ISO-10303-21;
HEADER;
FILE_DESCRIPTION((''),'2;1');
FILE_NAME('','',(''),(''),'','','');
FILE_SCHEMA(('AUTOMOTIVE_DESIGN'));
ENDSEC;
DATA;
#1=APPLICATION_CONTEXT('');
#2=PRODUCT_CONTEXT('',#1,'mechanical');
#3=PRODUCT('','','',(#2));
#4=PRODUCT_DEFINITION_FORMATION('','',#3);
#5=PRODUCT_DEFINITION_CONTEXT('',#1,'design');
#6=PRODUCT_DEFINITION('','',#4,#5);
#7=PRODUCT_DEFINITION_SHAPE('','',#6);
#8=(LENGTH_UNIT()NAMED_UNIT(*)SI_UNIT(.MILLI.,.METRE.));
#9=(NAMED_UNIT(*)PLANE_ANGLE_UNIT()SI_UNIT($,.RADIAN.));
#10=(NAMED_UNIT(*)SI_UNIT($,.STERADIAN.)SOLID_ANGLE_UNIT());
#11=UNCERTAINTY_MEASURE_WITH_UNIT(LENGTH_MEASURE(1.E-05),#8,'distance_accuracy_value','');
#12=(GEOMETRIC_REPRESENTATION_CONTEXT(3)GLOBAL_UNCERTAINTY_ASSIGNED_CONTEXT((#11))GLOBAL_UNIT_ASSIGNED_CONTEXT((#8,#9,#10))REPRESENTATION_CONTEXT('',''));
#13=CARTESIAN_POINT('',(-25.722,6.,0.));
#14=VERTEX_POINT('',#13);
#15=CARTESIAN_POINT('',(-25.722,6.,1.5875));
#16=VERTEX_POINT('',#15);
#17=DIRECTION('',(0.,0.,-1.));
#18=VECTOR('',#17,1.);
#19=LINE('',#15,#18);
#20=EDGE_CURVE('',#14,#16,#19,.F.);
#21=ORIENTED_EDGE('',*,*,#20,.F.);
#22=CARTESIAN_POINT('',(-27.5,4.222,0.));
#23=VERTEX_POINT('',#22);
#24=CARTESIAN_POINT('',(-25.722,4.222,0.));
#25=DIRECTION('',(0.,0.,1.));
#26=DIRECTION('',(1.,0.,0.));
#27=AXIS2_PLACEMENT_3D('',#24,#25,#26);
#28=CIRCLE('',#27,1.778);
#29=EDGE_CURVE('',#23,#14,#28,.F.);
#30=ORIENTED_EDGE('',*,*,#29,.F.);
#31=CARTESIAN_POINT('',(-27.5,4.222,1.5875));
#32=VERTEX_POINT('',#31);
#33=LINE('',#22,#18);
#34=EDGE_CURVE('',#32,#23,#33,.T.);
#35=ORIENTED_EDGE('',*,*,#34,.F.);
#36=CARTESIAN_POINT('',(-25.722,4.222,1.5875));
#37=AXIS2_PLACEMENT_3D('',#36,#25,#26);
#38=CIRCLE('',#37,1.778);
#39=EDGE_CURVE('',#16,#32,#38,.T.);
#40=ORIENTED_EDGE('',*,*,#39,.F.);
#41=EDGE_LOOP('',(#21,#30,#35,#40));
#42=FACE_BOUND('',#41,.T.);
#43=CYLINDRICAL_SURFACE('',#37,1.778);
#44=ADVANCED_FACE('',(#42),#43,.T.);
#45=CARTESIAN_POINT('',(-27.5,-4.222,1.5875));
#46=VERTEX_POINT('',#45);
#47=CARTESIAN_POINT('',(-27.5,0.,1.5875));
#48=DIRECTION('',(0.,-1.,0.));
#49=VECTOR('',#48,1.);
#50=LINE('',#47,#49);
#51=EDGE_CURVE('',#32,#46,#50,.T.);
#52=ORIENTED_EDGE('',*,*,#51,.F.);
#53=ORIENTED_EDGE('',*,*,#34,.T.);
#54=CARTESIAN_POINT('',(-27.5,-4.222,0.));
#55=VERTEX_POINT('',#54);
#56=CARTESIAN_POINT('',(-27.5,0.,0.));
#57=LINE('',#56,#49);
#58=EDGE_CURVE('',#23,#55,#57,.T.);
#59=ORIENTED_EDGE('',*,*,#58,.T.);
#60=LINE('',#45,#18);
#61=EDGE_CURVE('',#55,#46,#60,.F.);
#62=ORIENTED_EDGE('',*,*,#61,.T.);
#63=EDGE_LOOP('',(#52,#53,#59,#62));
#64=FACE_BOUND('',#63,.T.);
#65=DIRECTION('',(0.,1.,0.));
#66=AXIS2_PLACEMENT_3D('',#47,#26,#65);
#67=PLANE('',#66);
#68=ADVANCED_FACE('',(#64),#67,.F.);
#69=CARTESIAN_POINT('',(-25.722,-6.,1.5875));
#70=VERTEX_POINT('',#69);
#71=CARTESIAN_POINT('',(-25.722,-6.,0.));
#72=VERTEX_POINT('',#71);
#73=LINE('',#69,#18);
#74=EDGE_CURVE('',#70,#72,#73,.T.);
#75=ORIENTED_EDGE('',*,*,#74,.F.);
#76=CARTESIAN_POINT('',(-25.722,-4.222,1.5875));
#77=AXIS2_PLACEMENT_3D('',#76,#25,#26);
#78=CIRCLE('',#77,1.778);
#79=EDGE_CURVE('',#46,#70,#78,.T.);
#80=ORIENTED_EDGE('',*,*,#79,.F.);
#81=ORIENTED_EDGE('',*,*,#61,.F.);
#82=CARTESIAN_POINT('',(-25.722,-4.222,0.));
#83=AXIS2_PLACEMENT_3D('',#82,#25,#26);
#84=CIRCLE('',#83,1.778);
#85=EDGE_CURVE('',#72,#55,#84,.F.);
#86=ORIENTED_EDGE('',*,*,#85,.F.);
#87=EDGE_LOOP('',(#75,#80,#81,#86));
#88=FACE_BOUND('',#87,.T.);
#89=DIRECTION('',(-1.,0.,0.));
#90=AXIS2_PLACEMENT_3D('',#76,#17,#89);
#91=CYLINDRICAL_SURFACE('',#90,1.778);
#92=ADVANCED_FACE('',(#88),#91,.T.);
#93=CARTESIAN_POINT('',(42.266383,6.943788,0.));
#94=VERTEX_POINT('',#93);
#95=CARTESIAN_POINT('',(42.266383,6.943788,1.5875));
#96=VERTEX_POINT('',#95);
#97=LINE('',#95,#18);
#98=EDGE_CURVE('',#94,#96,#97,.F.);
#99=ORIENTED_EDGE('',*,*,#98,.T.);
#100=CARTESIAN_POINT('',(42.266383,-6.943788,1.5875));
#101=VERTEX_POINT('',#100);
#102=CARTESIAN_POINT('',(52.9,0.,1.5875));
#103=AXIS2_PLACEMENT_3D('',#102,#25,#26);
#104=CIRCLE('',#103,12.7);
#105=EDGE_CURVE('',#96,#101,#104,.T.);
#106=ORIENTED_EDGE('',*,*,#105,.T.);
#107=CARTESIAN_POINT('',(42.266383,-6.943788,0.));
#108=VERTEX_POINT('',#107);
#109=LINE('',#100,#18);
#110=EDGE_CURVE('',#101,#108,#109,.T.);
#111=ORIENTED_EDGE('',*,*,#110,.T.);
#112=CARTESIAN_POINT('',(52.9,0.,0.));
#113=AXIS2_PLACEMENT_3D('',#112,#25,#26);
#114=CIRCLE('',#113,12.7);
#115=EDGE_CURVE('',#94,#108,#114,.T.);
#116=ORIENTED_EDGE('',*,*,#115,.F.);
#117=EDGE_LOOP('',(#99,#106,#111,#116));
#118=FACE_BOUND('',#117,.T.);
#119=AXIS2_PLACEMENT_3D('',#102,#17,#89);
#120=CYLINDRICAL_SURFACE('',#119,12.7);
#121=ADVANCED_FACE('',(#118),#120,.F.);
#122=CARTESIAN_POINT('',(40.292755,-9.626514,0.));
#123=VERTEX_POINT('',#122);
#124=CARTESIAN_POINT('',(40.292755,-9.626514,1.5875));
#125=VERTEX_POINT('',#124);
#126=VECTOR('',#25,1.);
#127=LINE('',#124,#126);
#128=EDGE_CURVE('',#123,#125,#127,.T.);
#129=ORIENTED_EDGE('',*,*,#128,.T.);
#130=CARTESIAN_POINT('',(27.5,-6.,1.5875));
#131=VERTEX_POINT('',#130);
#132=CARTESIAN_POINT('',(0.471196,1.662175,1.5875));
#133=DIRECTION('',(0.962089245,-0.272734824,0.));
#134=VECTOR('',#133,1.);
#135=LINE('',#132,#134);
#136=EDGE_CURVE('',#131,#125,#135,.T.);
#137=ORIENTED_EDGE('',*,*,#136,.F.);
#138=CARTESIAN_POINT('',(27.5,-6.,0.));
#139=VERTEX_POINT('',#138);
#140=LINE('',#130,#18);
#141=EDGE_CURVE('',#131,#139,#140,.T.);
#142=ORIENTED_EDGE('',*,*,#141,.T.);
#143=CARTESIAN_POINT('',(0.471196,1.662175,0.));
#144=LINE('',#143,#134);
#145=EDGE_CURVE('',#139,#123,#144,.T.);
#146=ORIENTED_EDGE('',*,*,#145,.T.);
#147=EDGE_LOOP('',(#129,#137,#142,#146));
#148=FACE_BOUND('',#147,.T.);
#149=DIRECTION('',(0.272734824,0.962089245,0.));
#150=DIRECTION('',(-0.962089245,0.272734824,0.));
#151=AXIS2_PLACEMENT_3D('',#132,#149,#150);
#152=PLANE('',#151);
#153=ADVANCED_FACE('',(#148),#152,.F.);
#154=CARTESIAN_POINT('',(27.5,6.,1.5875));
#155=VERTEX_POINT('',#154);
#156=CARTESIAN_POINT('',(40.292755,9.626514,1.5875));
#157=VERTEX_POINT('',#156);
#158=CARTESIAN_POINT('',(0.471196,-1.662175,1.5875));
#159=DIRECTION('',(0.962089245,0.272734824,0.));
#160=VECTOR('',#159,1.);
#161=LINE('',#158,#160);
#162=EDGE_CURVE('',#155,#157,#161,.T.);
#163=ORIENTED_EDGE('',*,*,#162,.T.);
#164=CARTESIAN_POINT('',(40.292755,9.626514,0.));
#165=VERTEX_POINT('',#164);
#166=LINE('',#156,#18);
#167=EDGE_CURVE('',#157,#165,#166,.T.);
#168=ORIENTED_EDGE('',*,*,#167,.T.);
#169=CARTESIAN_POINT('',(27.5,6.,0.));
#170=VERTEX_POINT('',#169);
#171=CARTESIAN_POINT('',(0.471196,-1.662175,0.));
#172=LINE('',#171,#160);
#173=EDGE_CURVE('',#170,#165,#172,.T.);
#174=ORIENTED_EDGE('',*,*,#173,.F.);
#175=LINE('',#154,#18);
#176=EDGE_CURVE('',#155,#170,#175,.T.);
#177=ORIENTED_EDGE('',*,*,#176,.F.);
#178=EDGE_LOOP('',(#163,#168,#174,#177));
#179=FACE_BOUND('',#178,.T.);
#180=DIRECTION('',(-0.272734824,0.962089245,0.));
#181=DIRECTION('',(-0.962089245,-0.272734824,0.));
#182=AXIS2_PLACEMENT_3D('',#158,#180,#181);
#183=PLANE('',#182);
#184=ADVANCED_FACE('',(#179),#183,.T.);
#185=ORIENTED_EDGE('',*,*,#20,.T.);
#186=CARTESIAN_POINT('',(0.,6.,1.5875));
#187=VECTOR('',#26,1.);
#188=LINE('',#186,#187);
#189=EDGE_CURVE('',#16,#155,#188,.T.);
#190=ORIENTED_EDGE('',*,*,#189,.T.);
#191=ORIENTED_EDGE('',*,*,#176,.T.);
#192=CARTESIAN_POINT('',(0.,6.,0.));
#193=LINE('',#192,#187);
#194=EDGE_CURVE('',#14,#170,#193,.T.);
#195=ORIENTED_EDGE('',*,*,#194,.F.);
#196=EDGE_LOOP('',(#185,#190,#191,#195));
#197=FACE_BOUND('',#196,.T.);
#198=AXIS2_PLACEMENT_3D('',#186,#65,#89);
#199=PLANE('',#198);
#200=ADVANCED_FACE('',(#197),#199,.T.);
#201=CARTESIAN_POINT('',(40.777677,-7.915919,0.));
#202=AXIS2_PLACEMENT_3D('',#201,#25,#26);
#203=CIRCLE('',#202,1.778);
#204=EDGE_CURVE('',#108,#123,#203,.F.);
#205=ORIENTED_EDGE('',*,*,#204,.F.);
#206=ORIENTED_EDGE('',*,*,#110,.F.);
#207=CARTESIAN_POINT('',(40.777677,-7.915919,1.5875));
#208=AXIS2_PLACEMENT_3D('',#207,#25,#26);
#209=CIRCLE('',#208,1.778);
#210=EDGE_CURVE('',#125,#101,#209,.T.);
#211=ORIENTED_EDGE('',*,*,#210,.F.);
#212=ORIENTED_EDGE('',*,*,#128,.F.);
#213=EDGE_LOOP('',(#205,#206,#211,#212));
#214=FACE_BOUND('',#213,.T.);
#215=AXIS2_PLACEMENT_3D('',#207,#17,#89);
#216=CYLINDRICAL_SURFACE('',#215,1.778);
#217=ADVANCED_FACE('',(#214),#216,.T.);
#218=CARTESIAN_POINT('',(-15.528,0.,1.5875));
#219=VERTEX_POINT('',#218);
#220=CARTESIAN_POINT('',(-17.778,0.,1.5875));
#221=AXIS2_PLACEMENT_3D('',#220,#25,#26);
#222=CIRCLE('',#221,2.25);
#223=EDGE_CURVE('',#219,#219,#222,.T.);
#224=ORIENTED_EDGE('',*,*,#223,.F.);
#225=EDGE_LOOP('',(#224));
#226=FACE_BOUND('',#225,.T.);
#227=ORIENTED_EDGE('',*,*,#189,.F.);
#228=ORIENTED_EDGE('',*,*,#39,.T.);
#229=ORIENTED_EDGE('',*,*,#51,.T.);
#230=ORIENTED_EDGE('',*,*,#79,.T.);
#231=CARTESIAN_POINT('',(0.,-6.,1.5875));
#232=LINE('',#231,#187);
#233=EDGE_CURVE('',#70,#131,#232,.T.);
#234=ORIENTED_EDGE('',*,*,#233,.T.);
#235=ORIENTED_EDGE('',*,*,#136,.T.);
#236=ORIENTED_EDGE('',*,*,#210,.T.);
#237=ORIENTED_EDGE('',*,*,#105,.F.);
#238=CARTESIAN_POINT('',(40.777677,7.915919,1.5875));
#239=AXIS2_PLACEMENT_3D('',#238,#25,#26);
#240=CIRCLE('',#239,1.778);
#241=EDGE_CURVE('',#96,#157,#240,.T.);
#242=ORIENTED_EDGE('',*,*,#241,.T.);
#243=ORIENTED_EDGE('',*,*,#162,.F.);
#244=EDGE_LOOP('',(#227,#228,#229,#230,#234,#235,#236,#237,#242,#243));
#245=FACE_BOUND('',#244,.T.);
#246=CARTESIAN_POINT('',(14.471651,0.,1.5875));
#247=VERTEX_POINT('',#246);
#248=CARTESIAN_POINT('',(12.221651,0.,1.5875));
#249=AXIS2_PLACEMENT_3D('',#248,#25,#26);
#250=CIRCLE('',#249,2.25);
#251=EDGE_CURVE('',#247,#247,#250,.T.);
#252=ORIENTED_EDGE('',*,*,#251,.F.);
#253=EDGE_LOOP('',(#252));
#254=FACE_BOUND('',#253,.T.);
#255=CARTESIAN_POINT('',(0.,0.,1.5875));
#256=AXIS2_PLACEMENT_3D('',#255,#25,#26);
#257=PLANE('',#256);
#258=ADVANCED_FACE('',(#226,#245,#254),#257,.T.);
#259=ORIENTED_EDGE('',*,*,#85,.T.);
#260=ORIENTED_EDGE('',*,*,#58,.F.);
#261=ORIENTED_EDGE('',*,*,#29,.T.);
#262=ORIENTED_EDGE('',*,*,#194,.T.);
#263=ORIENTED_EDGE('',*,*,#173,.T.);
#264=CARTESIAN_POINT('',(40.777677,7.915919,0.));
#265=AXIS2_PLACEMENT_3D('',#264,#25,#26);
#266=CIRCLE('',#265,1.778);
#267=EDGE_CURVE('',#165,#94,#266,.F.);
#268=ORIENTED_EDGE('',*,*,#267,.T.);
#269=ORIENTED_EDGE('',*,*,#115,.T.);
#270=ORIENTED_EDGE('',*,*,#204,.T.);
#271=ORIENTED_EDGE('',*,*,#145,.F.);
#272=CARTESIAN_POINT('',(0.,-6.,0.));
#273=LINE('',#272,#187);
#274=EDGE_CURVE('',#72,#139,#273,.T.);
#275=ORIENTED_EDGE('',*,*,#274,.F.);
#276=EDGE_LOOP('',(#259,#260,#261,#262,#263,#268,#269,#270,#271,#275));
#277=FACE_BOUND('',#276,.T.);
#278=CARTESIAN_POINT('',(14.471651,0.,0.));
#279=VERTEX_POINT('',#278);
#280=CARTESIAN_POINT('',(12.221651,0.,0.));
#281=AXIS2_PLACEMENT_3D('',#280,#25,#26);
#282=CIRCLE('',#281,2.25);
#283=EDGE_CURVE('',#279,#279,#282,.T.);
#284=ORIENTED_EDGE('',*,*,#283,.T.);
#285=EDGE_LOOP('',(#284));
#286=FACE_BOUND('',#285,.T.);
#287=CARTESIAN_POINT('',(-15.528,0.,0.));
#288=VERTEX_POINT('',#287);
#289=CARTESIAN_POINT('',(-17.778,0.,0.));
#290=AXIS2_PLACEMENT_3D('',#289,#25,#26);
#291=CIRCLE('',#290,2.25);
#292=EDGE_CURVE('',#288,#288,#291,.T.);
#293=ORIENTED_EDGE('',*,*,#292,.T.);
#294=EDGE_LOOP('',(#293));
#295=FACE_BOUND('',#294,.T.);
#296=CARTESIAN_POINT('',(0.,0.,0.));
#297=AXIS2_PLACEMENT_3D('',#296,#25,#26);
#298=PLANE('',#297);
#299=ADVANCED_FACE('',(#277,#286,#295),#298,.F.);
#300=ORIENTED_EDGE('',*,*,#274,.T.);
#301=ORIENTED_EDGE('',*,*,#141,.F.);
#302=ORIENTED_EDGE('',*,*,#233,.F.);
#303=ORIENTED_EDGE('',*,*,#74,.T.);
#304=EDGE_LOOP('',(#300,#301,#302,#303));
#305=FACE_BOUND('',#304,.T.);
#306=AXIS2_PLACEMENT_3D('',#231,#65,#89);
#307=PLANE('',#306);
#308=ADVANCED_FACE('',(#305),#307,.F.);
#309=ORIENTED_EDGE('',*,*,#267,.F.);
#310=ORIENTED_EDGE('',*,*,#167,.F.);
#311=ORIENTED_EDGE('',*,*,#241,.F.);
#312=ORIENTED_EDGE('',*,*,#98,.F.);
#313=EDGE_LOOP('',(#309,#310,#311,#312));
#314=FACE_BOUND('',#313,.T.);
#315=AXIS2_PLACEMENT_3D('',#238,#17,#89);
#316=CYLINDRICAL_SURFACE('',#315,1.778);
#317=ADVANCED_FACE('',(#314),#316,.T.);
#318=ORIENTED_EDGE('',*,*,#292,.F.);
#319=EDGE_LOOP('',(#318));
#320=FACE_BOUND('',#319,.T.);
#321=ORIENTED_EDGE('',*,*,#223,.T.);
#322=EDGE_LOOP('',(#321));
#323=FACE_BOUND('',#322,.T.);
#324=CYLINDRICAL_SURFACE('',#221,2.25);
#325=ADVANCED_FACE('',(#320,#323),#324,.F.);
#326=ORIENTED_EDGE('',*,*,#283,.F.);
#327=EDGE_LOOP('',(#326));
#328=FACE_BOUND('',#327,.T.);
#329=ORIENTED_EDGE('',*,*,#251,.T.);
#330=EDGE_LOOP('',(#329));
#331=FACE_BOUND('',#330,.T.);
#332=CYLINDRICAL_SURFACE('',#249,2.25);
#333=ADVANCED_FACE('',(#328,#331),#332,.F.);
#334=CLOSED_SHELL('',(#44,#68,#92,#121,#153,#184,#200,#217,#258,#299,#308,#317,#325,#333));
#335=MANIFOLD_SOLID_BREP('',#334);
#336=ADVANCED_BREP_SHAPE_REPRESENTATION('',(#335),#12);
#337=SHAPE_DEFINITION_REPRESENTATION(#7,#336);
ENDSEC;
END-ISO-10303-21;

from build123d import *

# Parameters (mm, degrees)
BOSS_EXTRUDE1_DEPTH  = 1.5875
FILLET2_DEPTH        = 1.5875
M4_CLEARANCE_HOLE1_D = 4.5


with BuildPart() as part:
    # Sketch1 → Boss-Extrude1 (new body)
    with BuildSketch(Plane.XY):
        with BuildLine():
            Line((27.5, 6), (-27.5, 6))
            Line((-27.5, 6), (-27.5, -6))
            Line((-27.5, -6), (27.5, -6))
            Line((27.5, -6), (49.436268592, -12.218533657))
            ThreePointArc((49.436268592, -12.218533657), (40.2, -4.45e-07), (49.436267736, 12.218533415))
            Line((49.436267736, 12.218533415), (27.5, 6))
        make_face()
    extrude(amount=BOSS_EXTRUDE1_DEPTH)

    # Fillet2: read off the stored shape, not the designer's step
    # Fillet2 outline → Fillet2 (cut)
    with BuildSketch(Plane.XY):
        with BuildLine():
            ThreePointArc((-27.5, 4.222), (-26.979235857, 5.479235857), (-25.722, 6))
            Line((-25.722, 6), (-27.5, 6))
            Line((-27.5, 6), (-27.5, 4.222))
        make_face()
        with BuildLine():
            ThreePointArc((-25.722, -6), (-26.979235857, -5.479235857), (-27.5, -4.222))
            Line((-27.5, -4.222), (-27.5, -6))
            Line((-27.5, -6), (-25.722, -6))
        make_face()
        with BuildLine():
            Line((49.436267736, 12.218533415), (40.292754575, 9.626513532))
            ThreePointArc((40.292754575, 9.626513532), (42.209860363, 8.969548331), (42.266383414, 6.943788468))
            ThreePointArc((42.266383414, 6.943788468), (45.374075159, 10.229880512), (49.436267736, 12.218533415))
        make_face()
        with BuildLine():
            ThreePointArc((49.436267736, -12.218533415), (45.374075159, -10.229880512), (42.266383413, -6.943788468))
            ThreePointArc((42.266383413, -6.943788468), (42.209860363, -8.969548331), (40.292754575, -9.626513532))
            Line((40.292754575, -9.626513532), (49.436267736, -12.218533415))
        make_face()
    extrude(amount=FILLET2_DEPTH, mode=Mode.SUBTRACT)

    # M4 Clearance Hole1 (through all)
    with Locations(Plane.XY.offset(1.5875)):
        with Locations((-17.778, 0), (12.221650814, 0)):
            Hole(M4_CLEARANCE_HOLE1_D / 2)


solid = part.part
